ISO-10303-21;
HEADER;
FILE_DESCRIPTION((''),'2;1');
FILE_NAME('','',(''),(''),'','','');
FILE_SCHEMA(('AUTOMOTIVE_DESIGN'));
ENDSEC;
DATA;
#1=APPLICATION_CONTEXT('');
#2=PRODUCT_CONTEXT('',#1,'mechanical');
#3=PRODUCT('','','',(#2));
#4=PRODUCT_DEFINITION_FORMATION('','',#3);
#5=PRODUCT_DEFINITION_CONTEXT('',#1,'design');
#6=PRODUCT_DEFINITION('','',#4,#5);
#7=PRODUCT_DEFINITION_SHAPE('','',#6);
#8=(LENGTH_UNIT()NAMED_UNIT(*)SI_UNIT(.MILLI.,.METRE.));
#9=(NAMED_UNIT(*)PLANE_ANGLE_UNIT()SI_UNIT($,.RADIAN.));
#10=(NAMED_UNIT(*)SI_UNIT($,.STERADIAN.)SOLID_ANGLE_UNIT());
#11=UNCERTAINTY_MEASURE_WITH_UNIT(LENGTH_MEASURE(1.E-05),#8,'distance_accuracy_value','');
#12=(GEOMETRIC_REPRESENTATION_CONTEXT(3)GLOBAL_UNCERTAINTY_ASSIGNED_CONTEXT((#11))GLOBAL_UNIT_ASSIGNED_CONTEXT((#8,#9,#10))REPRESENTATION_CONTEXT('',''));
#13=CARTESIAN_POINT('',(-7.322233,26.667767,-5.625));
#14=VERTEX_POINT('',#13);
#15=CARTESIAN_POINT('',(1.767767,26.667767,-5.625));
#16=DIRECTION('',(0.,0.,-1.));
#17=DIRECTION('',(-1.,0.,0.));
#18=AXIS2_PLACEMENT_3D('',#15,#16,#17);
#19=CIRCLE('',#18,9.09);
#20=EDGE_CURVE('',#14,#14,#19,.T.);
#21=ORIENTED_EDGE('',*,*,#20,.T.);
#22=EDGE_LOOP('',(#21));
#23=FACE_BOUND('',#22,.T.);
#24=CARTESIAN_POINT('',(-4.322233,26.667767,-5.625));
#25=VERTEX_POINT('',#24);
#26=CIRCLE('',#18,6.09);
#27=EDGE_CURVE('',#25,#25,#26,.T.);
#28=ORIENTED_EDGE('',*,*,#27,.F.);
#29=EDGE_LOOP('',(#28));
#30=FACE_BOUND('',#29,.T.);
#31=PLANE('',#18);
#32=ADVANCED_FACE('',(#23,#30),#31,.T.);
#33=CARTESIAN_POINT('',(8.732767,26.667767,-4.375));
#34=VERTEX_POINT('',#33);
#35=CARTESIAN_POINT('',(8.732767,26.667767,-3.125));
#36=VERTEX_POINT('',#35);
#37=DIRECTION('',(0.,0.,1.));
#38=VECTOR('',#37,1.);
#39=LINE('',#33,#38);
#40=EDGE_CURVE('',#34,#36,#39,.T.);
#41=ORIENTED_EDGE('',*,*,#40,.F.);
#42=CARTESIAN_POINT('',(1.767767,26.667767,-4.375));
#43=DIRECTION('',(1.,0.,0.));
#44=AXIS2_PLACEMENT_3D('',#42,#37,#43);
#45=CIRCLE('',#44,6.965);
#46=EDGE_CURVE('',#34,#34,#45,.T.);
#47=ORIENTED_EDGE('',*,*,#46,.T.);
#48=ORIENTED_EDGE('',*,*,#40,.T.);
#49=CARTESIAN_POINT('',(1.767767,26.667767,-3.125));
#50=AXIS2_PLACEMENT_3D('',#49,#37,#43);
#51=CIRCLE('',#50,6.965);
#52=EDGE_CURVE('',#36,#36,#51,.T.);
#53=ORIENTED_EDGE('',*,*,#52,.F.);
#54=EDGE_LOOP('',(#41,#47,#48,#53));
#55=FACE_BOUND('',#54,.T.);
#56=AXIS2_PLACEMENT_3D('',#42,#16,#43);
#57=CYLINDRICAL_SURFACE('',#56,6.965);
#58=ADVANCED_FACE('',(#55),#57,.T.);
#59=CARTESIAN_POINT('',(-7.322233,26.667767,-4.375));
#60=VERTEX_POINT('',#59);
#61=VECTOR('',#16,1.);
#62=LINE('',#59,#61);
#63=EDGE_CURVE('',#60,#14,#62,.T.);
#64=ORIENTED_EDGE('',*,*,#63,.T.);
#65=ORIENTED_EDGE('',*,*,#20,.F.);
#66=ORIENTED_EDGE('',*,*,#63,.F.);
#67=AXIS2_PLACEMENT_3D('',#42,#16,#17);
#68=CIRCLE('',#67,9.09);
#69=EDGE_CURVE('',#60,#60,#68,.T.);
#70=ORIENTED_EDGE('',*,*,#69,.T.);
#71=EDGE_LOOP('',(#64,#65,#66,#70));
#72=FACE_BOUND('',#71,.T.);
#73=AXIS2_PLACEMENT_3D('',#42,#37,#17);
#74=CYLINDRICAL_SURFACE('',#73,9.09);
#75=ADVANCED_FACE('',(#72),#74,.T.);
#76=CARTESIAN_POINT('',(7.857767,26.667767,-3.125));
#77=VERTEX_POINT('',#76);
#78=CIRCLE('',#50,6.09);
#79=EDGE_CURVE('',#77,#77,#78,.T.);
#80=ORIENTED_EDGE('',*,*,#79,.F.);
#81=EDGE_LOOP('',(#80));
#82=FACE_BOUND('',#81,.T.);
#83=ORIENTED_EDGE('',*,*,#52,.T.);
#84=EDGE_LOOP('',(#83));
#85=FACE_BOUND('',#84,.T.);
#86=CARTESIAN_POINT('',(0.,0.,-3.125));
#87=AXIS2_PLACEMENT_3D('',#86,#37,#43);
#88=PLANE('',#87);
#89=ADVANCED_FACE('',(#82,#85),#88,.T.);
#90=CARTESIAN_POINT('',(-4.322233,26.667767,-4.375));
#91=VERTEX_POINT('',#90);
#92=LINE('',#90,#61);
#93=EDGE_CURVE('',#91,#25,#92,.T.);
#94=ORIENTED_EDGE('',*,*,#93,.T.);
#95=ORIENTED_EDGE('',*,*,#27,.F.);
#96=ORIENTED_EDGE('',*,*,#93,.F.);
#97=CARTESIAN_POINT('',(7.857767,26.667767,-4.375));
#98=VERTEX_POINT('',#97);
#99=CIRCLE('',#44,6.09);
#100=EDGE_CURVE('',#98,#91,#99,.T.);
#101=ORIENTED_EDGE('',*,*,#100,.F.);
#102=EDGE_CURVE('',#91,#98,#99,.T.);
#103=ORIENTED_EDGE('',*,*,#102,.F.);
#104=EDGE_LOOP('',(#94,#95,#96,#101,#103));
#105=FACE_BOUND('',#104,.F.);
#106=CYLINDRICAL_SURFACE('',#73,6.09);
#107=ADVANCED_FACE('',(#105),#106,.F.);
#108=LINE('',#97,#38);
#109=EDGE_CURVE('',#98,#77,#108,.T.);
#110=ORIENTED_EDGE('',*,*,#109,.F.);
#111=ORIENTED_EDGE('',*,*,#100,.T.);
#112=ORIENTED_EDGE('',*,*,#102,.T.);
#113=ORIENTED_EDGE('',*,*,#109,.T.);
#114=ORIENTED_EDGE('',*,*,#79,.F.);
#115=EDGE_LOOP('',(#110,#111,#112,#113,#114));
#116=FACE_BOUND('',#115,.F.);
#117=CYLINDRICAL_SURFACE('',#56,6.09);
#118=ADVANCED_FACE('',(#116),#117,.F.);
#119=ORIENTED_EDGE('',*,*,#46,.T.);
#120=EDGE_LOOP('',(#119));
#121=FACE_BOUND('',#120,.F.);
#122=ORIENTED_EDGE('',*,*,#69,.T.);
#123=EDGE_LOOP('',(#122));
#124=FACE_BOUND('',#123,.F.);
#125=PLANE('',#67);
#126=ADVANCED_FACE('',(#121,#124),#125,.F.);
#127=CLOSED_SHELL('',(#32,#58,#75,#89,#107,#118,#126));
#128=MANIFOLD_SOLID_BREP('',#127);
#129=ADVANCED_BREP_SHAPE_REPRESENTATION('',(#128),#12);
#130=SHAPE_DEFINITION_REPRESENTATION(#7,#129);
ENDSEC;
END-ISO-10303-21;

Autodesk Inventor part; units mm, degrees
ref_plane "YZ Plane" through (0, 0, 0) normal (1, 0, 0) x (0, 1, 0)
ref_plane "XZ Plane" through (0, 0, 0) normal (0, 1, 0) x (-1, 0, 0)
sketch "Sketch1" plane through (0, 0, 0) normal (0, 0, 1) x (1, 0, 0)
  circle A0 centre (1.767767, 26.667767) radius 7
  circle A1 centre (1.767767, 26.667767) radius 6.965
  circle A2 centre (1.767767, 26.667767) radius 6.09
  point P0 (0, 0)
  dimension "d0" = 0.035
  dimension "d2" = 0.875
ref_plane "Work Plane1" through (-19.467767, 1.0375, -4.375) normal (0, 0, -1) x (0, 1, 0)
sketch "Sketch1 outline for Extrusion1" plane through (0, 0, 0) normal (0, 0, 1) x (1, 0, 0)
  circle A0 centre (1.767767, 26.667767) radius 6.965
  circle A1 centre (1.767767, 26.667767) radius 6.09
extrude "Extrusion1" add sketch "Sketch1 outline for Extrusion1" along normal blind 1.25 from surface at -4.375
sketch "Sketch2" plane through (1.767767, 26.667767, -4.375) normal (0, 0, -1) x (-1, 0, 0)
  circle A0 centre (0, 0) radius 6.965 projected
  circle A1 centre (0, 0) radius 6.09 projected
  circle A2 centre (0, 0) radius 7.09
  circle A3 centre (0, 0) radius 9.09
  point P0 (1.767767, -26.667767)
  dimension "d5" = 0.125
  dimension "d6" = 2
extrude "Extrusion2" add sketch "Sketch2" along normal blind 1.25 contours A0 | A2 | A3
properties part number "Half Inch Lense Holder Cover (V5)"
